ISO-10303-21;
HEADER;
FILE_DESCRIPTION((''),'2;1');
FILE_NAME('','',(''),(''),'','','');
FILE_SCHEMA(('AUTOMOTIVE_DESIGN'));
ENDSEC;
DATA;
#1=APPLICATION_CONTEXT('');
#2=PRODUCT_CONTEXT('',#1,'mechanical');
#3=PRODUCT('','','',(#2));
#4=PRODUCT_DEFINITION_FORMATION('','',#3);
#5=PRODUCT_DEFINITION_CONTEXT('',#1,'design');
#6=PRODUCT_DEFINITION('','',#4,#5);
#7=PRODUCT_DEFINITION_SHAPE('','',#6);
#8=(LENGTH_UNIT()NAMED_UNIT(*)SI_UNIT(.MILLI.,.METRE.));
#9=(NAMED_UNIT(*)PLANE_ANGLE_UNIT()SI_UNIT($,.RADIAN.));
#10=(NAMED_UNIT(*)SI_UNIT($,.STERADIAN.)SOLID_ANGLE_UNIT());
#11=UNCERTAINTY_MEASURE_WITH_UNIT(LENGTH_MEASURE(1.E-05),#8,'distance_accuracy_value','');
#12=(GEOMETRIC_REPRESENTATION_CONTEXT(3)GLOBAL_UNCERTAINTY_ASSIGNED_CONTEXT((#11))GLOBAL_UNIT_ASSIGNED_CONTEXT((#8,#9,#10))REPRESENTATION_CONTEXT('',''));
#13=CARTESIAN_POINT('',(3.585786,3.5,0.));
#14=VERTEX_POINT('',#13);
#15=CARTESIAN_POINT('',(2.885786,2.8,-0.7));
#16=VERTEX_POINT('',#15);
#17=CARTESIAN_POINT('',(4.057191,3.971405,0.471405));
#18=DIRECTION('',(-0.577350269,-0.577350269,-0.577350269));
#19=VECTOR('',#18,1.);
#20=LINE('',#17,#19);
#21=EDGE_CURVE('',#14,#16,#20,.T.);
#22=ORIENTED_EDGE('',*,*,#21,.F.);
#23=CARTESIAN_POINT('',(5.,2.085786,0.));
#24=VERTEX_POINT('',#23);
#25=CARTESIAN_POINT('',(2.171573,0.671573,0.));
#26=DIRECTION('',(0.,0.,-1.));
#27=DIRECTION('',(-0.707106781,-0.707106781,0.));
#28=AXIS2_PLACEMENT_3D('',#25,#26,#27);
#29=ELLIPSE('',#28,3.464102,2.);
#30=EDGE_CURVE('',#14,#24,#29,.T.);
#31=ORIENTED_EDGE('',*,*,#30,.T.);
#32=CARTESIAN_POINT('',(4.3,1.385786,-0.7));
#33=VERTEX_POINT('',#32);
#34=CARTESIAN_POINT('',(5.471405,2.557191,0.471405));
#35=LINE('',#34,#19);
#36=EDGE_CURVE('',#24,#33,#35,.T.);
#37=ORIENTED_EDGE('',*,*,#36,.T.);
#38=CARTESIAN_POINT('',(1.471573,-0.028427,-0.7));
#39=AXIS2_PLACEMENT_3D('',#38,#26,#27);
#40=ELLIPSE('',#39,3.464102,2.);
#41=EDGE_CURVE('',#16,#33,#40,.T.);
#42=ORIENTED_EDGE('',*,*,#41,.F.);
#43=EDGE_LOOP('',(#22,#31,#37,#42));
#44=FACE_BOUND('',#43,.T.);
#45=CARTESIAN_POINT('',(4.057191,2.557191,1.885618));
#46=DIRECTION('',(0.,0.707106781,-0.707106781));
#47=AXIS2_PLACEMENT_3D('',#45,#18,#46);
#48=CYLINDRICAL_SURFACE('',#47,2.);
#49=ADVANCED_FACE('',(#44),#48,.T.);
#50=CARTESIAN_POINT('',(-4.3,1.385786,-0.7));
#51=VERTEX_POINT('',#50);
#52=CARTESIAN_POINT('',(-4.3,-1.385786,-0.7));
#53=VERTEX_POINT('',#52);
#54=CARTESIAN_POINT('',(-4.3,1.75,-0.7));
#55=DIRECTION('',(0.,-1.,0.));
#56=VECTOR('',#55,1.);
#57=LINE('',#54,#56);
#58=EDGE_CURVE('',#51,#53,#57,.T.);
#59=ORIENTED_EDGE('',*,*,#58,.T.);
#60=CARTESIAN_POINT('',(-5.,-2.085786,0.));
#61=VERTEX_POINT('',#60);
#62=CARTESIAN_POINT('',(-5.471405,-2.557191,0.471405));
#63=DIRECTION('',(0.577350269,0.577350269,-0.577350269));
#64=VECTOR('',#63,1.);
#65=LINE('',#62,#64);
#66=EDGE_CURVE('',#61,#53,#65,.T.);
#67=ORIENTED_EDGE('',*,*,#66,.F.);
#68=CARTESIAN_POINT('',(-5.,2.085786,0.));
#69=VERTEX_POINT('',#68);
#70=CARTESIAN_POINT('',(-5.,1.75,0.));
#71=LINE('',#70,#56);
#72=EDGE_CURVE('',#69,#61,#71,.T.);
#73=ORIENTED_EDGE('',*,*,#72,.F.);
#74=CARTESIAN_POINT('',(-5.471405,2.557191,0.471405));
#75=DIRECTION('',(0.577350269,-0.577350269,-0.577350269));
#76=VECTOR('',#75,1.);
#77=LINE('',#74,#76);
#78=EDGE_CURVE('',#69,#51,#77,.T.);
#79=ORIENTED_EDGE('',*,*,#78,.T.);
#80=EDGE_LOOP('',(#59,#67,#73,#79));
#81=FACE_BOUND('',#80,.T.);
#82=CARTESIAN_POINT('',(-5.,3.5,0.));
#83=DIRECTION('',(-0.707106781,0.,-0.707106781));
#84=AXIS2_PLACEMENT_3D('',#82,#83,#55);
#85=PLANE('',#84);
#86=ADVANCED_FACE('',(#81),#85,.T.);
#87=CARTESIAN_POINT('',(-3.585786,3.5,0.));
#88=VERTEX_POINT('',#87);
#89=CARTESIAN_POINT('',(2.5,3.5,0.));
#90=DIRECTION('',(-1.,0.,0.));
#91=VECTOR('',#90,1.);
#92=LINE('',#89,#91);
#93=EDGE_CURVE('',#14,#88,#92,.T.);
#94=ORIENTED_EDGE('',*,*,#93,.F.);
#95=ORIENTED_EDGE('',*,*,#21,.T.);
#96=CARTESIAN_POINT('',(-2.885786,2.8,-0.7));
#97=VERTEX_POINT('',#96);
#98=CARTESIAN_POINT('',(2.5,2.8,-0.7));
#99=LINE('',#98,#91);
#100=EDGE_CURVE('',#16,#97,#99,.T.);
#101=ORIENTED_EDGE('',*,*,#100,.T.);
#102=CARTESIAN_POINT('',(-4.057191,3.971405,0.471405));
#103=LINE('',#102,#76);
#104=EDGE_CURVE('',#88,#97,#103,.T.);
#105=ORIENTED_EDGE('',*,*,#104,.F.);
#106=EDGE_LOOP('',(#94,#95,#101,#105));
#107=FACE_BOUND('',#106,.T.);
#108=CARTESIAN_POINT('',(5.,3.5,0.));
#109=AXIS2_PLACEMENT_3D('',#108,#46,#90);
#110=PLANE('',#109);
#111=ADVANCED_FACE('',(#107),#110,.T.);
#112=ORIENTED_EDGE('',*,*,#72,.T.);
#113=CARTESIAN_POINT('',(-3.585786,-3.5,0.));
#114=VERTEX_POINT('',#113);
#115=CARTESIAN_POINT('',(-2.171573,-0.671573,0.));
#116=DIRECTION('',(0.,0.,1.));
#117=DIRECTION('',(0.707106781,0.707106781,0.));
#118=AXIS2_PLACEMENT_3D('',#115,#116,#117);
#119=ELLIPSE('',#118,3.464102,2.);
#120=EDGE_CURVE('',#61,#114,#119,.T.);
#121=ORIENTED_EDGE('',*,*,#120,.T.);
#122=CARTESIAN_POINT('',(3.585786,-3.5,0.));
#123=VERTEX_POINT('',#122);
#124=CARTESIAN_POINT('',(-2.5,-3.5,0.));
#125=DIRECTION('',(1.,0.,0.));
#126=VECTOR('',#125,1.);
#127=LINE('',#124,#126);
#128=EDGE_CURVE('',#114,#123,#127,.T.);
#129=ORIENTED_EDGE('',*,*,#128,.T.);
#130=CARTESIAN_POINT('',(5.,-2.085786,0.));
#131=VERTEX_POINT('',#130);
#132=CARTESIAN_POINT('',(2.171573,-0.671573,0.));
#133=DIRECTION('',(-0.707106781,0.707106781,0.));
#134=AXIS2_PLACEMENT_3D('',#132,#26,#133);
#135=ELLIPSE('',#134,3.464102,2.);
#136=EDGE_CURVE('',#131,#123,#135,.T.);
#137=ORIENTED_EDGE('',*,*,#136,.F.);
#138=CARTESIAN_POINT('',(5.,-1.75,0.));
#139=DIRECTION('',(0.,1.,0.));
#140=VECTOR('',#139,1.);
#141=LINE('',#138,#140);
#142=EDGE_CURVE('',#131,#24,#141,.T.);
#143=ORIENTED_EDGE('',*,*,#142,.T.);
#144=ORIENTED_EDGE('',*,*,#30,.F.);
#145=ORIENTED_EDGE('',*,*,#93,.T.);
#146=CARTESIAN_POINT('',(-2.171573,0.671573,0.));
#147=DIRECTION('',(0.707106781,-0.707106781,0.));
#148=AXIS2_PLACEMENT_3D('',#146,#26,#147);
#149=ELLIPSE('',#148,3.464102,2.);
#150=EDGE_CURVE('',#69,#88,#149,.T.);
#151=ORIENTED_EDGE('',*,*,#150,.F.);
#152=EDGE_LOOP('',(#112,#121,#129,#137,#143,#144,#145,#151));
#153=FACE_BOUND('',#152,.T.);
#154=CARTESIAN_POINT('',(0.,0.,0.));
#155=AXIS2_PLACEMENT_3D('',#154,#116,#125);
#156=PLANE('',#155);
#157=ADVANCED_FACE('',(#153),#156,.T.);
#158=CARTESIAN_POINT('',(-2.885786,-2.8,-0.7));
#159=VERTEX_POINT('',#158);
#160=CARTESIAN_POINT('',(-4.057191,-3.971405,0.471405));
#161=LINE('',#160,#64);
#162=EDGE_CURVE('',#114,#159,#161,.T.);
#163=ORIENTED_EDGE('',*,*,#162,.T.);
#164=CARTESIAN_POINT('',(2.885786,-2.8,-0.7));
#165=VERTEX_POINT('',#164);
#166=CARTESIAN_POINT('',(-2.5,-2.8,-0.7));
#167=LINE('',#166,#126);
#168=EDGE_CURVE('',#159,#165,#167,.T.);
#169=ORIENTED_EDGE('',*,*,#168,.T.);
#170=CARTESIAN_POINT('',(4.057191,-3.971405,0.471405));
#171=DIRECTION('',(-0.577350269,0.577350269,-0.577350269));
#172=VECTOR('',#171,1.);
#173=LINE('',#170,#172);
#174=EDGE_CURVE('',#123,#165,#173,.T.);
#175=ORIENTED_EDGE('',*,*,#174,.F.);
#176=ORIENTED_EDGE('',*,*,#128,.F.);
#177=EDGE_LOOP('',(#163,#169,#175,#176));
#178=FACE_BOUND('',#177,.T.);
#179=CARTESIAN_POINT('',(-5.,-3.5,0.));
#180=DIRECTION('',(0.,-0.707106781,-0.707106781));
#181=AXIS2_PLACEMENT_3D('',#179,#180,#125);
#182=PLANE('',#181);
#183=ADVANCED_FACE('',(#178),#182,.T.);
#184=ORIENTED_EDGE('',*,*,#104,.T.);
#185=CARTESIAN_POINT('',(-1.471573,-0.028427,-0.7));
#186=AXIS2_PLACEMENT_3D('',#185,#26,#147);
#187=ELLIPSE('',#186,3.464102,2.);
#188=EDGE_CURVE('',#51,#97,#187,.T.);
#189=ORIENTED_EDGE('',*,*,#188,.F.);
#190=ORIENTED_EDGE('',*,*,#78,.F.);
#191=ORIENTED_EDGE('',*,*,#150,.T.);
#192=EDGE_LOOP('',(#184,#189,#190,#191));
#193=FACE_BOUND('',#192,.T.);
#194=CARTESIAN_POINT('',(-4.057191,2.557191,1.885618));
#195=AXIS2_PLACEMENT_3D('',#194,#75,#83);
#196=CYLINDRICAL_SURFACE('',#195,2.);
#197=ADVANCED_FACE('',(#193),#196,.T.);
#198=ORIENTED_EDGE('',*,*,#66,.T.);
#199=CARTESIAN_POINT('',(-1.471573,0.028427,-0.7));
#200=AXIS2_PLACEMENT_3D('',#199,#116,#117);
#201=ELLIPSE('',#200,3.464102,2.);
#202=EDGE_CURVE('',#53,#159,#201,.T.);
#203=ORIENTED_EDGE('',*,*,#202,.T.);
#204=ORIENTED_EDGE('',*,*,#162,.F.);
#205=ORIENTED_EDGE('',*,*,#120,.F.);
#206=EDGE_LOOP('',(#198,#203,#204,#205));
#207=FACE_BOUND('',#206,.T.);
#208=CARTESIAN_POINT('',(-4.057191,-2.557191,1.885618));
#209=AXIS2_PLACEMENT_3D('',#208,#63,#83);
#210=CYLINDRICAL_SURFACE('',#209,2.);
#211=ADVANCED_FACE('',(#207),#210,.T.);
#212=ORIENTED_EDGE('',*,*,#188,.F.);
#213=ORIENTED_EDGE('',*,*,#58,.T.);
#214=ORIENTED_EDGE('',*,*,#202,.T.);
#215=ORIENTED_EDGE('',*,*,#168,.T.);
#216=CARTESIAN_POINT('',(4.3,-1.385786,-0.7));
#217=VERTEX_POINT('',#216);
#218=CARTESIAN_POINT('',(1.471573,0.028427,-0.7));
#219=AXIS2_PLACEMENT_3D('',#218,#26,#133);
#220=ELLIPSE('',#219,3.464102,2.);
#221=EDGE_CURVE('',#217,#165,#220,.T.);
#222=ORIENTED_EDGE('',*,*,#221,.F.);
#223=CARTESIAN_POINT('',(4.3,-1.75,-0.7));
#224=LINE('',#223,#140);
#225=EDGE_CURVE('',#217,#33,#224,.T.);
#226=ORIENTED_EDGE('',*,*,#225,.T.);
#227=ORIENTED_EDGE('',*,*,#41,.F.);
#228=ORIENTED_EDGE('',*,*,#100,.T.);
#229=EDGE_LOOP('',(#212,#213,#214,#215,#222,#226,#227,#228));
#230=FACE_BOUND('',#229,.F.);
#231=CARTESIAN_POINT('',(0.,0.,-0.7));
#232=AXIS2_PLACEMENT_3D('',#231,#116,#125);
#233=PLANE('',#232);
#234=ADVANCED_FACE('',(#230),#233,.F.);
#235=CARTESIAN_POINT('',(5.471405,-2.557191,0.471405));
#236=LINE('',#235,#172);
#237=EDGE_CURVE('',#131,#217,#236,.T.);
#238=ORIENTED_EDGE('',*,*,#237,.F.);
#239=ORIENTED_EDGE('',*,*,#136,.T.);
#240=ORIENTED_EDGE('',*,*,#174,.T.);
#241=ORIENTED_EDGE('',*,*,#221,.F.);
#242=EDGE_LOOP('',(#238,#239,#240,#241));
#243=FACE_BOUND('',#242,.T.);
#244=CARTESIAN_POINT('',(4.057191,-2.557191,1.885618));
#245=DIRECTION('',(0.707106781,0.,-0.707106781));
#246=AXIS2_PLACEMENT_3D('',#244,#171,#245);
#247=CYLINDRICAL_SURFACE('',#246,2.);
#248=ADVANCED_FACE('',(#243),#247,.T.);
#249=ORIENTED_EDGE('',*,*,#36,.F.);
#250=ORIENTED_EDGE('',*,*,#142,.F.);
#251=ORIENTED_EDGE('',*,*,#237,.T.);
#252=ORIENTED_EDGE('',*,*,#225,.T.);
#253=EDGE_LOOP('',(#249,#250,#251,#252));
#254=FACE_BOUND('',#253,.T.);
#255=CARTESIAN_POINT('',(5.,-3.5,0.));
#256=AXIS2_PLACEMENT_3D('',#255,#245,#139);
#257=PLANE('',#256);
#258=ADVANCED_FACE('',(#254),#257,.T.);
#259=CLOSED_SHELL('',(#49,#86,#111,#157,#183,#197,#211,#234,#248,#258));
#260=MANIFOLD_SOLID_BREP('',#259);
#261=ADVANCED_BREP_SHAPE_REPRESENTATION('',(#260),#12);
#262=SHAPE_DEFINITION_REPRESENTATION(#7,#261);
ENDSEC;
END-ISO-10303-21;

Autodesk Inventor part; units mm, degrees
ref_plane "YZ Plane" through (0, 0, 0) normal (1, 0, 0) x (0, 1, 0)
ref_plane "XZ Plane" through (0, 0, 0) normal (0, 1, 0) x (-1, 0, 0)
ref_plane "XY Plane" through (0, 0, 0) normal (0, 0, 1) x (1, 0, 0)
sketch "Sketch1" plane through (0, 0, 0) normal (0, 0, 1) x (1, 0, 0)
  line L0 (-5, -3.5) -> (5, -3.5)
  line L1 (5, -3.5) -> (5, 3.5)
  line L2 (5, 3.5) -> (-5, 3.5)
  line L3 (-5, 3.5) -> (-5, -3.5)
  line L4 (-5, -3.5) -> (5, 3.5) construction
  line L5 (5, -3.5) -> (-5, 3.5) construction
  point P0 (0, 0)
  dimension "d0" = 10
  dimension "d1" = 7
extrude "Extrusion1" add sketch "Sketch1" against normal blind 0.7 draft -45
fillet "Fillet1" radius 2 4 edges at (-4.65, -3.15, -0.35) (-4.65, 3.15, -0.35) (4.65, -3.15, -0.35) (4.65, 3.15, -0.35)
properties part number "Base"
